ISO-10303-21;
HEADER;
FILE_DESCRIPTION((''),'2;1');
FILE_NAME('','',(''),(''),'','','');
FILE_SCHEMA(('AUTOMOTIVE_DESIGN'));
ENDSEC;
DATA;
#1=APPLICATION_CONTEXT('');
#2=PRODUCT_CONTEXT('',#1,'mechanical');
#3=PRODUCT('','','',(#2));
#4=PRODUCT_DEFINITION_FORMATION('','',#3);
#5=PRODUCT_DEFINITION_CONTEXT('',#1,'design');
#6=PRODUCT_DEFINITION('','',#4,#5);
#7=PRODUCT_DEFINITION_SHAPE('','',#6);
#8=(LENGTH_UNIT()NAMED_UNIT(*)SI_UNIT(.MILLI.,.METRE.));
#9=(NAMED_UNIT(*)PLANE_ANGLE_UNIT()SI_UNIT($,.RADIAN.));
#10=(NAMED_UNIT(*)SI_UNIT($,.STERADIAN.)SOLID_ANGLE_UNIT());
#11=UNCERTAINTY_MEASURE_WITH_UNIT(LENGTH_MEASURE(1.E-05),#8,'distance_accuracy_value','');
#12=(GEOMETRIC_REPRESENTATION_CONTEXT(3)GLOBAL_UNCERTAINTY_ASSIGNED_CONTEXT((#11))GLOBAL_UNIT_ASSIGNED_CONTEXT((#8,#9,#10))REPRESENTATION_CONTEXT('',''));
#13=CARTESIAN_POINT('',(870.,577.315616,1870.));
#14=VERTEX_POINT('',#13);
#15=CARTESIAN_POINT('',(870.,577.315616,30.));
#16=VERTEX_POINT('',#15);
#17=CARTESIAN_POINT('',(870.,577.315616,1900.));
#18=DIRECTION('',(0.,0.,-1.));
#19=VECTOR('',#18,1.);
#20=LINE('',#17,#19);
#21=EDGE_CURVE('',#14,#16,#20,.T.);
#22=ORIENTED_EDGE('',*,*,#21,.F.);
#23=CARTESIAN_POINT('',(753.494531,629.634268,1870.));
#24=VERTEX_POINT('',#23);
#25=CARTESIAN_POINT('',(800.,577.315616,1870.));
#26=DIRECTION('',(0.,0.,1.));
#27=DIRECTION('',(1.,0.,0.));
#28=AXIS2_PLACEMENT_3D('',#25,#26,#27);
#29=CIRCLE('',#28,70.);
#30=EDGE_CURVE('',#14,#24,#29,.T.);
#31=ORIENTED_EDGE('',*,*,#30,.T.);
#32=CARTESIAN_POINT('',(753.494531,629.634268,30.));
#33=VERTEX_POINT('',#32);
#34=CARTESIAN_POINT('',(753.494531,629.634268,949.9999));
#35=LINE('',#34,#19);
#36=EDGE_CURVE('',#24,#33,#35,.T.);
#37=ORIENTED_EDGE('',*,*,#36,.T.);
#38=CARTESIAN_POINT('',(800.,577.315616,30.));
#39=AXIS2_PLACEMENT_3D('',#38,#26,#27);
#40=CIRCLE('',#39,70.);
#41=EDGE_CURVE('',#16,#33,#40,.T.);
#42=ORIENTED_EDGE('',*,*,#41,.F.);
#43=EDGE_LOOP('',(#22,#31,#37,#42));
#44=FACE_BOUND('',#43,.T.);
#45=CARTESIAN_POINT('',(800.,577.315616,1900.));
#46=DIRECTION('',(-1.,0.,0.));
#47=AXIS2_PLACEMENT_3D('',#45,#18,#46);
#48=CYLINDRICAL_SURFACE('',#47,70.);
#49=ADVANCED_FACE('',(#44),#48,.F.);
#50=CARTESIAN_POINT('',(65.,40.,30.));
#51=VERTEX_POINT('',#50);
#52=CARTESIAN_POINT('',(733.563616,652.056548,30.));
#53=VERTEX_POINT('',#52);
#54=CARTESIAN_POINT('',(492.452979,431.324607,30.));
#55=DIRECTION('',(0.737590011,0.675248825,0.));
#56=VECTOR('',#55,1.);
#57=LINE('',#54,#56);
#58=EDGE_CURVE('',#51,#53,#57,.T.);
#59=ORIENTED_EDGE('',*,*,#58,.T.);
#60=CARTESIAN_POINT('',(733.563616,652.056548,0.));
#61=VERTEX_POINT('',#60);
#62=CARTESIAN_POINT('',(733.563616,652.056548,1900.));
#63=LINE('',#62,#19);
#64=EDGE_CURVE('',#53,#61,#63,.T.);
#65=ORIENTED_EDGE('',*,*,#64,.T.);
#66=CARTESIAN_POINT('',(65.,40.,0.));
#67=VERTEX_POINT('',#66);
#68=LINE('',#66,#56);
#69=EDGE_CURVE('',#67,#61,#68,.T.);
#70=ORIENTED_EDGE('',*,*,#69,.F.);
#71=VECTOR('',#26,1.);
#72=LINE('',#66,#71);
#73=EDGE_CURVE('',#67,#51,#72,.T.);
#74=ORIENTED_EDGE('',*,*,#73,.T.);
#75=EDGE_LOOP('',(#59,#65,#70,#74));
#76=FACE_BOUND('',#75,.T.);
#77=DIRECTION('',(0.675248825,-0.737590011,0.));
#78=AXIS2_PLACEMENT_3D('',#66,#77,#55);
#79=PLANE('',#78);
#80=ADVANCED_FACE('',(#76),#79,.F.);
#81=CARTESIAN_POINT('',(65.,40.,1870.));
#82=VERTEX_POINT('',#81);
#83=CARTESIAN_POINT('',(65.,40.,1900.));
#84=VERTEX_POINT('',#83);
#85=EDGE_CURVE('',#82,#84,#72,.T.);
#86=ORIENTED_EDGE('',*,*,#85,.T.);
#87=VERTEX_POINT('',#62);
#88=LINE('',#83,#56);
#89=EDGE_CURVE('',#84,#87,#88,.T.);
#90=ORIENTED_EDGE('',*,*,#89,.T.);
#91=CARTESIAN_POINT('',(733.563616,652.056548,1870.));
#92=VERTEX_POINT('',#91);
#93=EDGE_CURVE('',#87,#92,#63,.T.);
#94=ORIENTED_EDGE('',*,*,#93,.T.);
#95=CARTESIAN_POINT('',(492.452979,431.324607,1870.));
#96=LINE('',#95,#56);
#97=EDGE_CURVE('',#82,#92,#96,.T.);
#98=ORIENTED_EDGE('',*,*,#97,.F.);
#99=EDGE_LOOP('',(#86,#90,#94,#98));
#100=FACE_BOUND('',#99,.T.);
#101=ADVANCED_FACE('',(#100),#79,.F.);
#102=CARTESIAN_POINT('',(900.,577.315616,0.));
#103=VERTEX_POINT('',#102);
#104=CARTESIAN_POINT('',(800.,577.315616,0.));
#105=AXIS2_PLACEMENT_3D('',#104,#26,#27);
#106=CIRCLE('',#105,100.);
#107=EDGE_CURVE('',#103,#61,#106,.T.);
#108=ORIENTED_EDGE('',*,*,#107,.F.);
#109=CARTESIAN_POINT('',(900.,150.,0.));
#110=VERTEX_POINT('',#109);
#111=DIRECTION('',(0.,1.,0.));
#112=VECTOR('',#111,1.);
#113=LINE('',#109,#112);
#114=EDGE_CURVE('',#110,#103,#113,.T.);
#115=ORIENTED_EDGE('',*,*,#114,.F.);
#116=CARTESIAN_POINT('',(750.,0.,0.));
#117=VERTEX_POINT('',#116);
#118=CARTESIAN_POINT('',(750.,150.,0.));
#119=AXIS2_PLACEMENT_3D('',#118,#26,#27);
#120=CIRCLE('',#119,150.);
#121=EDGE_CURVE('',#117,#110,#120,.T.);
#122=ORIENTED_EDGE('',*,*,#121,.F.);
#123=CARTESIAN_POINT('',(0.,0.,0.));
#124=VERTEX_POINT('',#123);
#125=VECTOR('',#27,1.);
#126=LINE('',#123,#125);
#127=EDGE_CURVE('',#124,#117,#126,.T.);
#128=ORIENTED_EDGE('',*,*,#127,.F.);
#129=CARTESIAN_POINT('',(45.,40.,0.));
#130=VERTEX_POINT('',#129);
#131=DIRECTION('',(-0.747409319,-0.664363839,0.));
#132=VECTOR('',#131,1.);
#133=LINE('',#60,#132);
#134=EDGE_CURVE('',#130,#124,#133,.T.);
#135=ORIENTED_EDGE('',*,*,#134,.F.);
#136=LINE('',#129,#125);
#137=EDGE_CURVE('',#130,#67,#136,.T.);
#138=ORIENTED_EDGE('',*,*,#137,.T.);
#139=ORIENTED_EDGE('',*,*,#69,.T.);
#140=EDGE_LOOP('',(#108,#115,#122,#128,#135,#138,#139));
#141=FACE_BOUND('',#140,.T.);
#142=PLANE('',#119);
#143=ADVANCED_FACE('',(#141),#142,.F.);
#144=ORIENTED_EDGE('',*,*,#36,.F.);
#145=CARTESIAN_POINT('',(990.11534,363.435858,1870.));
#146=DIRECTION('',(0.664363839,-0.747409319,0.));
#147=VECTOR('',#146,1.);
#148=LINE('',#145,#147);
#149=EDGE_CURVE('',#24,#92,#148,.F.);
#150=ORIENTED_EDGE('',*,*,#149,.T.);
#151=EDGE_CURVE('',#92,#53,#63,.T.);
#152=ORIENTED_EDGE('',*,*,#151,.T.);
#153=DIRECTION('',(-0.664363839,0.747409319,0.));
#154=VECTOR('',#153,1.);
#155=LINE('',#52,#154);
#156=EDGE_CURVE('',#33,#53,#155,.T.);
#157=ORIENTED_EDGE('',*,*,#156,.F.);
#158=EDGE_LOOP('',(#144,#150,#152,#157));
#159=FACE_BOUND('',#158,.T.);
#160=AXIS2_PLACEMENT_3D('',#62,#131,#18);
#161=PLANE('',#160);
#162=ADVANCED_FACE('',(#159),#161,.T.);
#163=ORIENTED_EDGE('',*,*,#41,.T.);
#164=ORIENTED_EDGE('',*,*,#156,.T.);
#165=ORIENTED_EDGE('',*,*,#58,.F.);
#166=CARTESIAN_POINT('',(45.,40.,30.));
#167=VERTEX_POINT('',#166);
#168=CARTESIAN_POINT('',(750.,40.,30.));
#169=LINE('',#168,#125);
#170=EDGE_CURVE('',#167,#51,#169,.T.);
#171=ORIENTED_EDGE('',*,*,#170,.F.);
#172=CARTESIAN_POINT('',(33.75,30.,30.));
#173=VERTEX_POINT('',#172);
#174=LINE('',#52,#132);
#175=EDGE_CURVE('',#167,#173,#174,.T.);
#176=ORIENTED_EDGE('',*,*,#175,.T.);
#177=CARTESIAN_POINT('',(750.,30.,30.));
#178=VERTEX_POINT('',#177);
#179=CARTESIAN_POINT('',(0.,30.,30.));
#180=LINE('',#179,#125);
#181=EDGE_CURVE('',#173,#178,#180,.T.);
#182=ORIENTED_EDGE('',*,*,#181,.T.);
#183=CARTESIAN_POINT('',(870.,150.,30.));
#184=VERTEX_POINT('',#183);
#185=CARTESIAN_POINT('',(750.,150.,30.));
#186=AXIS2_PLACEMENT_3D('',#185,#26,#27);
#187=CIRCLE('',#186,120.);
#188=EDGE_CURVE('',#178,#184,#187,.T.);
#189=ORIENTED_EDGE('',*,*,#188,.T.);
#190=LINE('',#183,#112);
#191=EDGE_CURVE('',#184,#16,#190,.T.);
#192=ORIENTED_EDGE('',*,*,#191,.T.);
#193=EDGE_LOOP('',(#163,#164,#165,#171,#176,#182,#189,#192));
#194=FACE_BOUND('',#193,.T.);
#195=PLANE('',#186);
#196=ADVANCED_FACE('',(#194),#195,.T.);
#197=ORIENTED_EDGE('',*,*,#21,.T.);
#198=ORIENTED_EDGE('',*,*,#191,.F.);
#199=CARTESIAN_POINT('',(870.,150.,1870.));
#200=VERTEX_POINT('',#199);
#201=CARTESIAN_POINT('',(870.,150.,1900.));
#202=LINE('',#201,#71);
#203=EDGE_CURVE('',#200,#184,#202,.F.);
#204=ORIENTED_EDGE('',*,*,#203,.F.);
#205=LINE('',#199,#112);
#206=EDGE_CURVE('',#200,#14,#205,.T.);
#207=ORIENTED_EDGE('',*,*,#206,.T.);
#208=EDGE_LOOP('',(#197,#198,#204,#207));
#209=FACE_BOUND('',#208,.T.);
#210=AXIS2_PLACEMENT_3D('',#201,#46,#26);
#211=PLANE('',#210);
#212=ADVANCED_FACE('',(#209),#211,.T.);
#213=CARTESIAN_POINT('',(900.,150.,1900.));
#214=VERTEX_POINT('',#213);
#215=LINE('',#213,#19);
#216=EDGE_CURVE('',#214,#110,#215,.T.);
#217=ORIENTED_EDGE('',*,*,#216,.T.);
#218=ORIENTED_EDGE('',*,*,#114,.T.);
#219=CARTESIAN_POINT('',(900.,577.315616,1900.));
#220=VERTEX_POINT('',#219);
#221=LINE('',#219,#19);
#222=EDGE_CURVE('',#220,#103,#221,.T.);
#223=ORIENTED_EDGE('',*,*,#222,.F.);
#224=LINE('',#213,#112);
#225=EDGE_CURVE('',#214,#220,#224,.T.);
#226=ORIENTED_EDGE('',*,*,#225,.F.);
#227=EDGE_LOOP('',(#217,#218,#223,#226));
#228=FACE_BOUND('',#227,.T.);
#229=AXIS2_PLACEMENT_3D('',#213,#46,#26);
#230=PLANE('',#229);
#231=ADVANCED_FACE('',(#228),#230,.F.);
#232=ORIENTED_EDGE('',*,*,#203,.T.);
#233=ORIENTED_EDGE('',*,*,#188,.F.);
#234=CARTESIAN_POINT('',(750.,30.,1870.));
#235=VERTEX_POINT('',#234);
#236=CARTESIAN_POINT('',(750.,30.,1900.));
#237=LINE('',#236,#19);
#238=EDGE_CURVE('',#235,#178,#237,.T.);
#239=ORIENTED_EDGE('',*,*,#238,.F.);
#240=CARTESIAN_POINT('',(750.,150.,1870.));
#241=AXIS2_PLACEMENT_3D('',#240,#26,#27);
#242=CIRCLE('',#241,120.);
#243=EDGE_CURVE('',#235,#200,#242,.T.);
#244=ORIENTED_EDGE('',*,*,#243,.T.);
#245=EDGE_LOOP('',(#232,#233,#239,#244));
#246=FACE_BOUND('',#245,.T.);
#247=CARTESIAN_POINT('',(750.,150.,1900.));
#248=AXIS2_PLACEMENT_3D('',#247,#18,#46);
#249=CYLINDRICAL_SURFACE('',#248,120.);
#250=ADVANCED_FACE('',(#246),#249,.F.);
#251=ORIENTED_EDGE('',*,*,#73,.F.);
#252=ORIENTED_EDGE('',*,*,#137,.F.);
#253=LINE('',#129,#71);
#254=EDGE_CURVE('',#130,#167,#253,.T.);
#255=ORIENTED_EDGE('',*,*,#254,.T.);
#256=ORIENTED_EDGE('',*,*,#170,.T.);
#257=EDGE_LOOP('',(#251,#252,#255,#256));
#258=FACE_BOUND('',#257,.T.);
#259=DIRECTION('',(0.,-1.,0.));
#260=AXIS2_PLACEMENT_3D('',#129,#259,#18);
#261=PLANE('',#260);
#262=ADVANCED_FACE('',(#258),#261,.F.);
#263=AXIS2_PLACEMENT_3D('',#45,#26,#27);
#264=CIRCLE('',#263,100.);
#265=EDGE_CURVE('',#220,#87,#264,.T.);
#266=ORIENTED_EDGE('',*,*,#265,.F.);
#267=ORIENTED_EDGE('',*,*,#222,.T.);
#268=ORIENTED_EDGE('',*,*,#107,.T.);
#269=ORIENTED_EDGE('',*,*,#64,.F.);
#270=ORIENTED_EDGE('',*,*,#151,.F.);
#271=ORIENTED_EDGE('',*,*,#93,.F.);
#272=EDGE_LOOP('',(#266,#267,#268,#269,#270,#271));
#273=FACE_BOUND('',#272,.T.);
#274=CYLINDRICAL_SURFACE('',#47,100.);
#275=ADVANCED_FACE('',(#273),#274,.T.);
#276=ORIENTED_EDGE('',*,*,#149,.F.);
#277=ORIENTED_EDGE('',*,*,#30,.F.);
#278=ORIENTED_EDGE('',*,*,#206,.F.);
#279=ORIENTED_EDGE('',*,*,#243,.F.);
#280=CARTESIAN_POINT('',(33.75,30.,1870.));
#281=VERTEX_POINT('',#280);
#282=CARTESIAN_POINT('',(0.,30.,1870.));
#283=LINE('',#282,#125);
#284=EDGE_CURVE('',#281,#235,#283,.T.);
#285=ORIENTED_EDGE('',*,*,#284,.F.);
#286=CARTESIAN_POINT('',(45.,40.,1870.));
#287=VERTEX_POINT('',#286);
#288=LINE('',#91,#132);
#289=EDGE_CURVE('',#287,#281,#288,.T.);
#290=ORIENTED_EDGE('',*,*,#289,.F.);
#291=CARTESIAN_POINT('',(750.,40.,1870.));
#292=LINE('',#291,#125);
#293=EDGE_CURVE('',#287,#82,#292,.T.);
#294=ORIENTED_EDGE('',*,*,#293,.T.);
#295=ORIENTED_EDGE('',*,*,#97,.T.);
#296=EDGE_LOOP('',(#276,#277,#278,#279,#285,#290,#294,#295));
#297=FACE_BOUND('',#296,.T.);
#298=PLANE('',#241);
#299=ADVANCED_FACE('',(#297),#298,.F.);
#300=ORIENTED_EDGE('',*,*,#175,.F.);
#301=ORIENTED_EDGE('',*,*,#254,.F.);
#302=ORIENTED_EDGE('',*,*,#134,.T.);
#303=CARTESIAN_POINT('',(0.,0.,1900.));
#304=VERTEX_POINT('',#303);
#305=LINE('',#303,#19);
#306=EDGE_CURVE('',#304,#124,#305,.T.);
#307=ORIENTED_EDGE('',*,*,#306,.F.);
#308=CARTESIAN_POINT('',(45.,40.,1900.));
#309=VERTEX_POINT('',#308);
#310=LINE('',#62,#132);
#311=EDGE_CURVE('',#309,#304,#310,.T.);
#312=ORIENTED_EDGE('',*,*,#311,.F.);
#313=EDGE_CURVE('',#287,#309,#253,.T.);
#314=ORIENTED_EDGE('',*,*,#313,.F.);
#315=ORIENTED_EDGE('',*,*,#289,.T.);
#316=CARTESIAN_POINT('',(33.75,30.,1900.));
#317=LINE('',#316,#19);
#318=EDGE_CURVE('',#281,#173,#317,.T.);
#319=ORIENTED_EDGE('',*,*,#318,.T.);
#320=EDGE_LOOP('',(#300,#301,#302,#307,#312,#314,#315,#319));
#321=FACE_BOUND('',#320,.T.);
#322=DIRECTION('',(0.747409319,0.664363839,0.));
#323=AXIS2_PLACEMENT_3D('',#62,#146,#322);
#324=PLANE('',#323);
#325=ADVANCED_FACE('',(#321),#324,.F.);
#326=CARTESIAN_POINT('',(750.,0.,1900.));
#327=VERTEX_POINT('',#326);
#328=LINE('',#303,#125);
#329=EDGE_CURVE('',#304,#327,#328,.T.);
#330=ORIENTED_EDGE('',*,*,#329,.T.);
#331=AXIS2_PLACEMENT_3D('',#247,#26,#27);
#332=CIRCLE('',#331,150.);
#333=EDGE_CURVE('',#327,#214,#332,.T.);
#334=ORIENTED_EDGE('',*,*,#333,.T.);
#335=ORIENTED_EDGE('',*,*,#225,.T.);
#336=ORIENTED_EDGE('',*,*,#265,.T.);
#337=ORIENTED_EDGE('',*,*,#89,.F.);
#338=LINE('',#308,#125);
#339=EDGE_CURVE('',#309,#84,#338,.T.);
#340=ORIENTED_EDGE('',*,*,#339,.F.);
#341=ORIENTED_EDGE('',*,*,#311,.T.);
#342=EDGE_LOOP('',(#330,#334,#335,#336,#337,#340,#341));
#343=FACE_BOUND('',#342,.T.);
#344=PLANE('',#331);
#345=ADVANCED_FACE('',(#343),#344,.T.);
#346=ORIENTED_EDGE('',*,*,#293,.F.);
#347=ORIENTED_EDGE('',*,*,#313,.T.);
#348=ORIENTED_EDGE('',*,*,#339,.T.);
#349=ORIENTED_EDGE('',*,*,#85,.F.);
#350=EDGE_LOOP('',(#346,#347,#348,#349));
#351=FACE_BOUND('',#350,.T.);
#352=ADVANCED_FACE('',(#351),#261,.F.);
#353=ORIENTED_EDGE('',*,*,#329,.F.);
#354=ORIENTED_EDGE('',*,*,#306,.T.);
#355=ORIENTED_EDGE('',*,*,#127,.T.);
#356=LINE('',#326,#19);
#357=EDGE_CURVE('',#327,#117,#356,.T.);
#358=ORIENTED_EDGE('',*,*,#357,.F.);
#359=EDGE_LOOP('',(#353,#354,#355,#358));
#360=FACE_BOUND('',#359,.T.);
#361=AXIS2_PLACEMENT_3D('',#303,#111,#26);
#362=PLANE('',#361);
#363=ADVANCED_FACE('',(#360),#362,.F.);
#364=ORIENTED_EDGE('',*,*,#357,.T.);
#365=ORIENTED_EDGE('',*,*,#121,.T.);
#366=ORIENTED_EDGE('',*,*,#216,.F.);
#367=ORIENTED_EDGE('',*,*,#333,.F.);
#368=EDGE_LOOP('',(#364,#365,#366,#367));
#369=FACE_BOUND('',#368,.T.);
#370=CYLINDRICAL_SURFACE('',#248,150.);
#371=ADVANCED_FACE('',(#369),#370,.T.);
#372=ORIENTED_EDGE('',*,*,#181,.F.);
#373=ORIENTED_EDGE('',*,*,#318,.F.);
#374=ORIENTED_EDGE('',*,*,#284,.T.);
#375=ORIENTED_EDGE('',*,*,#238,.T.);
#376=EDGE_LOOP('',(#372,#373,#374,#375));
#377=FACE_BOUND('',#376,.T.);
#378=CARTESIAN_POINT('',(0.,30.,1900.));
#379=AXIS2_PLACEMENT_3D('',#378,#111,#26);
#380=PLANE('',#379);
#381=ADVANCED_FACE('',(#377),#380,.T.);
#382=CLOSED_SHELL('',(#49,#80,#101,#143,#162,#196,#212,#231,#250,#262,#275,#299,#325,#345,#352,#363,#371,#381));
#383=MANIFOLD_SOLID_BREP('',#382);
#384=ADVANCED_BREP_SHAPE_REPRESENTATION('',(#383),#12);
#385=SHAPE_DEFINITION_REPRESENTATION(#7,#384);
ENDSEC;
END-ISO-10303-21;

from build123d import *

# Parameters (mm, degrees)
BOSS_EXTRUDE1_DEPTH = 1900
SHELL1_START        = 30
SHELL1_DEPTH        = 1840
CUT_EXTRUDE1_DEPTH  = 2209.790719691


# Read off the part's stored shape, not the designer's step: Shell1
with BuildPart() as part:
    # Sketch2 → Boss-Extrude1 (new body)
    with BuildSketch(Plane.XY):
        with BuildLine():
            Line((0, 0), (750, 0))
            ThreePointArc((750, 0), (856.066017178, 43.933982822), (900, 150))
            Line((900, 150), (900, 577.315615791))
            ThreePointArc((900, 577.315615791), (840.965605157, 668.539621372), (733.563616117, 652.05654766))
            Line((733.563616117, 652.05654766), (0, 0))
        make_face()
    extrude(amount=BOSS_EXTRUDE1_DEPTH)

    # Shell1 outline → Shell1 (cut)
    with BuildSketch(Plane.XY.offset(SHELL1_START)):
        with BuildLine():
            Line((753.494531282, 629.634268099), (733.563616117, 652.05654766))
            Line((733.563616117, 652.05654766), (33.75, 30))
            Line((33.75, 30), (750, 30))
            ThreePointArc((750, 30), (834.852813742, 65.147186258), (870, 150))
            Line((870, 150), (870, 577.315615791))
            ThreePointArc((870, 577.315615791), (828.67592361, 641.172419698), (753.494531282, 629.634268099))
        make_face()
    extrude(amount=SHELL1_DEPTH, mode=Mode.SUBTRACT)

    # Sketch3 → Cut-Extrude1 (cut, through all)
    with BuildSketch(Plane.XY.offset(1900)):
        Polygon((45, 40), (65, 40), (733.563616117, 652.05654766), align=None)
    extrude(amount=-CUT_EXTRUDE1_DEPTH, mode=Mode.SUBTRACT)


solid = part.part
